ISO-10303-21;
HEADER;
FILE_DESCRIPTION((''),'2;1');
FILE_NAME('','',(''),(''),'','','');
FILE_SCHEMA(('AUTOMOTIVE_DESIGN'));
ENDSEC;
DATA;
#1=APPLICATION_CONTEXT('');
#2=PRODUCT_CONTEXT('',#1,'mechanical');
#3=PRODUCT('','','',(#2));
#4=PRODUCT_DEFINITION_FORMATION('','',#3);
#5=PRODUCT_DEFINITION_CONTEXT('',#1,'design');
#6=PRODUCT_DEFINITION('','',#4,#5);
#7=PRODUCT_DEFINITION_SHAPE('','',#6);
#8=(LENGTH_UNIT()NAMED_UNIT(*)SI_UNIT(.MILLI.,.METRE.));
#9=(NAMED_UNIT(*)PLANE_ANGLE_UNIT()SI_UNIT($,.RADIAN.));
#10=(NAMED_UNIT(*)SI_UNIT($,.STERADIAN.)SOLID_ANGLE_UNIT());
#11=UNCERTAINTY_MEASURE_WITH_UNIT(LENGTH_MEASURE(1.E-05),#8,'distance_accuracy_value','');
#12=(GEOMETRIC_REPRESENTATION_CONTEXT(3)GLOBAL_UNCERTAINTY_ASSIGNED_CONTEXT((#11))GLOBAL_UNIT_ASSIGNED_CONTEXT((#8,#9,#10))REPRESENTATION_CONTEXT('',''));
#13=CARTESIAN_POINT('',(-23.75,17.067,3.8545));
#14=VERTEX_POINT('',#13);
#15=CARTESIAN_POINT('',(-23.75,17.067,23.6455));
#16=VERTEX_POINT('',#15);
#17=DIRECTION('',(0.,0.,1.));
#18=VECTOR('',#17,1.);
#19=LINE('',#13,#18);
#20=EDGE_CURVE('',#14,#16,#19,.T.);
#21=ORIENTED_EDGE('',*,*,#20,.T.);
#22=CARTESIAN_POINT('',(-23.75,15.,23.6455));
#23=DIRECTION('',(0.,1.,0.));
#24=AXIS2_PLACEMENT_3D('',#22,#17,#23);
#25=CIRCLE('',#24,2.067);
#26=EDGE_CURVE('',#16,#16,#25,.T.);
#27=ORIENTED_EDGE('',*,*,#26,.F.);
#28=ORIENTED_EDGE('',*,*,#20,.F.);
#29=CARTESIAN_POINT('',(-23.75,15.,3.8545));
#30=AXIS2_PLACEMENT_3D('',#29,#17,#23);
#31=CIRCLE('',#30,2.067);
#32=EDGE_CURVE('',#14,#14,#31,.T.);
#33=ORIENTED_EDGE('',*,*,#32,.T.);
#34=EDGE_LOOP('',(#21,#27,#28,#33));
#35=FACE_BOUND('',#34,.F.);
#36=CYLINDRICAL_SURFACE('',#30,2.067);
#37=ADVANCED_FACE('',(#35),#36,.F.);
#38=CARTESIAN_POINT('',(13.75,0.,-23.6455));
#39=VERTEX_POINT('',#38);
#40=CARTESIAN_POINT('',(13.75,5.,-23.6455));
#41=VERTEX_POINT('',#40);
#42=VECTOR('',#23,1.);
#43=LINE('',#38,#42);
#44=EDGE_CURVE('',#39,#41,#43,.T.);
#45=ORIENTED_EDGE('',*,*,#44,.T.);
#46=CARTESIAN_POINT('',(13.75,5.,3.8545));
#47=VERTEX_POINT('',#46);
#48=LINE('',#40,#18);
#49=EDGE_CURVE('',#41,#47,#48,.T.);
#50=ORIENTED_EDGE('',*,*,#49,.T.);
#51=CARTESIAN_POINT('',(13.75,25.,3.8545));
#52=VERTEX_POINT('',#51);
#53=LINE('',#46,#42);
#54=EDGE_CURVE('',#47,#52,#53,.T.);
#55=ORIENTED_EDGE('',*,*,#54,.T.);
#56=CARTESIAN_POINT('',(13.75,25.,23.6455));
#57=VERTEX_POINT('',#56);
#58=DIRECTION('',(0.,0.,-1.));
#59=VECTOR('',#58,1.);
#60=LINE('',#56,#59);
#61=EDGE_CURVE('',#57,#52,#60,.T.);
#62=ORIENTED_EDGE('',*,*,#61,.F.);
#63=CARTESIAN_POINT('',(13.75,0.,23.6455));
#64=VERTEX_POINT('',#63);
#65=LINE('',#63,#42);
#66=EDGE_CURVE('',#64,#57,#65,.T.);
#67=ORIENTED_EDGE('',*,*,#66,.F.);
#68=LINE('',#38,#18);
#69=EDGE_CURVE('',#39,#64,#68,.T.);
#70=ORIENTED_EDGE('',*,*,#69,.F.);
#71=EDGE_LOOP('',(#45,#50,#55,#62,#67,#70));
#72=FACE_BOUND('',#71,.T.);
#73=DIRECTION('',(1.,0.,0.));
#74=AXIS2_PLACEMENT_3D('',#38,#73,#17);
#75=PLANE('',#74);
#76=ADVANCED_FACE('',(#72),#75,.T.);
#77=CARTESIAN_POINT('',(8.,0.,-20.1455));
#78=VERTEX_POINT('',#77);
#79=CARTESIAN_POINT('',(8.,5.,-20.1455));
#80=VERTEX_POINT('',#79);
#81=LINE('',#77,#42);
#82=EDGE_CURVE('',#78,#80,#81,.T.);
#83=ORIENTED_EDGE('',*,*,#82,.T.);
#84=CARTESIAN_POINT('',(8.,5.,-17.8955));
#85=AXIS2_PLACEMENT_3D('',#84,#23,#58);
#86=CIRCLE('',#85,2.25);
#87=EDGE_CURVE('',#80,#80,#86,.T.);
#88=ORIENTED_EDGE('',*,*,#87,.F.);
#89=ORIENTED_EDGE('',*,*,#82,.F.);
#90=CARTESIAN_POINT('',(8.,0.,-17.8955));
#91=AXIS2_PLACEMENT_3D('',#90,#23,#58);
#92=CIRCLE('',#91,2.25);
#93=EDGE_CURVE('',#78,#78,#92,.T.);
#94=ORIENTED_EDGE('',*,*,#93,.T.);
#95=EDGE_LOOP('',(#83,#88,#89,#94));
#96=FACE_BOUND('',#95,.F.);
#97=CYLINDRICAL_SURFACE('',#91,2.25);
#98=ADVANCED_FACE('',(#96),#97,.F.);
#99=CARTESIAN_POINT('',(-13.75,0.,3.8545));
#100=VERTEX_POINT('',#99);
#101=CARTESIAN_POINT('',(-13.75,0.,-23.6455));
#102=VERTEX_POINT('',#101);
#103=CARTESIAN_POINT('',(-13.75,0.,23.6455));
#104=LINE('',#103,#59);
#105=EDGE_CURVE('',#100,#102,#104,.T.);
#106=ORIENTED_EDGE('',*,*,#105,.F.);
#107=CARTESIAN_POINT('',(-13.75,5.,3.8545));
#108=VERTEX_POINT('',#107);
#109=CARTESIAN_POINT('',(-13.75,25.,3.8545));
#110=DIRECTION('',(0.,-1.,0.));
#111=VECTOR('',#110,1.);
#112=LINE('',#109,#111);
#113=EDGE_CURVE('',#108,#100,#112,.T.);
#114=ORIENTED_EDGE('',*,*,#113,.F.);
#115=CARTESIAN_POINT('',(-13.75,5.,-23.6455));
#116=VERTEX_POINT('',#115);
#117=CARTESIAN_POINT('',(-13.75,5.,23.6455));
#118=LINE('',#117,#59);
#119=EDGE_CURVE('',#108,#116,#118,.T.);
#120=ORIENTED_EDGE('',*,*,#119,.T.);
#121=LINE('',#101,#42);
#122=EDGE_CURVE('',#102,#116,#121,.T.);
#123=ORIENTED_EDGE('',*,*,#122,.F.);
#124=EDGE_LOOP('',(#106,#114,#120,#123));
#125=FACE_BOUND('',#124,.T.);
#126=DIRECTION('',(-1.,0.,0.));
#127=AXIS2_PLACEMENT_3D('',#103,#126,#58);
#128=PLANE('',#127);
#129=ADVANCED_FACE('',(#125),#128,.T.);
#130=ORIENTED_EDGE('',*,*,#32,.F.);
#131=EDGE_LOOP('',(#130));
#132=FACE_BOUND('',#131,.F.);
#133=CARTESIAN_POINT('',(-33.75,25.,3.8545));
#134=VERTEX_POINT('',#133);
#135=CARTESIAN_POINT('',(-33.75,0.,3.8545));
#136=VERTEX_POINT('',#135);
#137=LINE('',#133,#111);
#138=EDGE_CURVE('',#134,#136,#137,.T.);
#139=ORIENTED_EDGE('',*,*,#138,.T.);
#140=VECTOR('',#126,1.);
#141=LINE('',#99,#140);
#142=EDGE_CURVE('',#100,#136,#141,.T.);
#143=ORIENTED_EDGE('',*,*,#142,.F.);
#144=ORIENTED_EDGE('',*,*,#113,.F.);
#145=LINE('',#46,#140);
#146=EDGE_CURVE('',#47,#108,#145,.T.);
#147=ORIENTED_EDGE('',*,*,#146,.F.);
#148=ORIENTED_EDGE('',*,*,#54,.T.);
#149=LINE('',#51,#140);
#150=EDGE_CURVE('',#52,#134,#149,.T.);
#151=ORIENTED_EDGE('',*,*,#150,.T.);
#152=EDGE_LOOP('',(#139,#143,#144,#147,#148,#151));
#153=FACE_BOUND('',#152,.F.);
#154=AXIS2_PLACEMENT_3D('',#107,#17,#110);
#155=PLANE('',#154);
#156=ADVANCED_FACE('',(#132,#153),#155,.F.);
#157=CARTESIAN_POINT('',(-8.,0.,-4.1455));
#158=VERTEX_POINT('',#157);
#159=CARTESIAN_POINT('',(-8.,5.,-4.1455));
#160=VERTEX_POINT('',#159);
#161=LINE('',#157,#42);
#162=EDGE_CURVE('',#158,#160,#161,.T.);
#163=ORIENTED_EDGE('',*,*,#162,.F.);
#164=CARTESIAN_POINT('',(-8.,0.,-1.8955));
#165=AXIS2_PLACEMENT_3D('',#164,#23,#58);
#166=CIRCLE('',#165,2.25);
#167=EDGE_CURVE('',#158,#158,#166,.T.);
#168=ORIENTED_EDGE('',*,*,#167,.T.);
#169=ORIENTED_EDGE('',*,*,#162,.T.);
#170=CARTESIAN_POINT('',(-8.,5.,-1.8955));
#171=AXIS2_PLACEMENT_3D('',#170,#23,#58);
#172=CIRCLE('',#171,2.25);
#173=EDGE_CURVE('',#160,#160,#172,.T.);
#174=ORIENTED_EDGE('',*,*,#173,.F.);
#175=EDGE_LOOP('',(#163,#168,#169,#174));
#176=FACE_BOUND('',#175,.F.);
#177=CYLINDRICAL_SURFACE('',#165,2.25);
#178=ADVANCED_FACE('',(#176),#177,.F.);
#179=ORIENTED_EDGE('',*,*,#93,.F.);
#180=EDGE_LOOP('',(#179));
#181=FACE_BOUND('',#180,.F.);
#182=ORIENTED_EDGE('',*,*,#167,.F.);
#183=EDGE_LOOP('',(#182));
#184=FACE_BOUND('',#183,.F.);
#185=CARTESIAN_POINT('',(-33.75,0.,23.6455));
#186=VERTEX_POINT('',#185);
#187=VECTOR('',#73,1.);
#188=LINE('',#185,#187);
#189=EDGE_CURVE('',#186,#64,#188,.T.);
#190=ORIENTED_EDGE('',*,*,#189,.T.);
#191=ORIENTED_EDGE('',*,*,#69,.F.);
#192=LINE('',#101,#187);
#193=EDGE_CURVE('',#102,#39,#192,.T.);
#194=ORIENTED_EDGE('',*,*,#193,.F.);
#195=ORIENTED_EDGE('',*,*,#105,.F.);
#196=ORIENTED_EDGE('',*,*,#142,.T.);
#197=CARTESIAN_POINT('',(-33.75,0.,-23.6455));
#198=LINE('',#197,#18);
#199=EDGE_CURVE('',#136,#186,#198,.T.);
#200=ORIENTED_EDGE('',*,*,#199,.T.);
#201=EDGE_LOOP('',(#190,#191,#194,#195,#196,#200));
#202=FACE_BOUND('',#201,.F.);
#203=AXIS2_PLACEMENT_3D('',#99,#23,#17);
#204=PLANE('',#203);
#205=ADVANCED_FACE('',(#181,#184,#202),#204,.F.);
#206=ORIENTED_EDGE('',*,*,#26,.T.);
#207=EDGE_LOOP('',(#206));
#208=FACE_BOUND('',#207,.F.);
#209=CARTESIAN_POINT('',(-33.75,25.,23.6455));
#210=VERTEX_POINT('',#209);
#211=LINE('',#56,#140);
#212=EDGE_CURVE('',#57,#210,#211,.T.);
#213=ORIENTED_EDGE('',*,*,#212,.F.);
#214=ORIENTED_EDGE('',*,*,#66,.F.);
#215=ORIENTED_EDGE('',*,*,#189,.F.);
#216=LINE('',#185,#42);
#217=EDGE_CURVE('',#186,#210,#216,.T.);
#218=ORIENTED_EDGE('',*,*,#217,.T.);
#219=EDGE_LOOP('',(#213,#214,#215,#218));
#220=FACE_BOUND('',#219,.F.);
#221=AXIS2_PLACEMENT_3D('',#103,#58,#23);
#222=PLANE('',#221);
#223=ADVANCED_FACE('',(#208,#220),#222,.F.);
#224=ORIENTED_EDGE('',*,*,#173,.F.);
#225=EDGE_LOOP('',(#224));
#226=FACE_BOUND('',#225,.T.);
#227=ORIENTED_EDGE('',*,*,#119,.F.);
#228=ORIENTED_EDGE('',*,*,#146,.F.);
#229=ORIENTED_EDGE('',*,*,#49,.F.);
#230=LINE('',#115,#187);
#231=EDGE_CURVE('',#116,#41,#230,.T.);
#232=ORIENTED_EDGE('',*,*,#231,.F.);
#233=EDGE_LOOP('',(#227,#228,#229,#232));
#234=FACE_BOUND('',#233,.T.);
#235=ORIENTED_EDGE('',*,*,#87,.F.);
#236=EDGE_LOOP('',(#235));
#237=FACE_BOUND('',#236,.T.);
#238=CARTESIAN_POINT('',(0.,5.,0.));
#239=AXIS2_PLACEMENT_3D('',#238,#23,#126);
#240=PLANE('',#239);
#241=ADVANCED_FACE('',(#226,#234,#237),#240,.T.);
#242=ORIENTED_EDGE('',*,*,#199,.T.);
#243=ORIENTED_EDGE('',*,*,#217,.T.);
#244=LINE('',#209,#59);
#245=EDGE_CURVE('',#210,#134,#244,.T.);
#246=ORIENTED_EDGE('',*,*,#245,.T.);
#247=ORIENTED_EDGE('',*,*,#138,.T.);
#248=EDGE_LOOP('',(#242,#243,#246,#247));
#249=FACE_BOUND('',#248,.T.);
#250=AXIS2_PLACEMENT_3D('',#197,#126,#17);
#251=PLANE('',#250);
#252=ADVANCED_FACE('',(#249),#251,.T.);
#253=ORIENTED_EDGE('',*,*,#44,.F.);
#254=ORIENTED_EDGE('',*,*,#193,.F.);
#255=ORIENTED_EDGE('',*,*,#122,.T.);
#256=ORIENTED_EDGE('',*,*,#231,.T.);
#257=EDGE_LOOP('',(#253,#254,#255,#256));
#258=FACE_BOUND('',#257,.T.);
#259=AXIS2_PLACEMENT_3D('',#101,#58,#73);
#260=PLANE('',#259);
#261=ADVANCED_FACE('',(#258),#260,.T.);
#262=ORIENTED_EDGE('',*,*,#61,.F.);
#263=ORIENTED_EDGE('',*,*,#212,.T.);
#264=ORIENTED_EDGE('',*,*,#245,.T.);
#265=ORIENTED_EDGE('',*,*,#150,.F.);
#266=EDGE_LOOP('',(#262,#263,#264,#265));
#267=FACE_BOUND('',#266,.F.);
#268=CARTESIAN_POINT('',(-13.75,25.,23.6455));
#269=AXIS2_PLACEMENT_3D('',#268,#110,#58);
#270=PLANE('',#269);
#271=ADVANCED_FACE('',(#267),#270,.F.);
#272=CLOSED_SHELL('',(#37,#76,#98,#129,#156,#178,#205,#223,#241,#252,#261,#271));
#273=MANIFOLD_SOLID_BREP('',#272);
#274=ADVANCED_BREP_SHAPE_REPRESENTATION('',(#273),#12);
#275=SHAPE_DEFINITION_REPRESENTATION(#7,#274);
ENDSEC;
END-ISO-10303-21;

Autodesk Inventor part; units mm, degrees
ref_plane "YZ Plane" through (0, 0, 0) normal (1, 0, 0) x (0, 1, 0)
ref_plane "XZ Plane" through (0, 0, 0) normal (0, 1, 0) x (-1, 0, 0)
ref_plane "XY Plane" through (0, 0, 0) normal (0, 0, 1) x (1, 0, 0)
sketch "Sketch1" plane through (0, 0, 0) normal (0, 1, 0) x (-1, 0, 0)
  line L0 (-13.75, 23.6455) -> (13.75, 23.6455)
  line L1 (13.75, 23.6455) -> (13.75, -23.6455)
  line L2 (13.75, -23.6455) -> (-13.75, -23.6455)
  line L3 (-13.75, -23.6455) -> (-13.75, 23.6455)
  line L4 (-13.75, 23.6455) -> (13.75, -23.6455) construction
  line L5 (13.75, 23.6455) -> (-13.75, -23.6455) construction
  point P0 (0, 0)
  dimension "d0" = 47.291
  dimension "d1" = 27.5
extrude "Extrusion1" add sketch "Sketch1" along normal blind 5
sketch "Sketch2" plane through (0, 5, 0) normal (0, 1, 0) x (1, 0, 0)
  line L0 (-13.75, 23.6455) -> (-13.75, -23.6455) projected
  line L1 (13.75, -23.6455) -> (13.75, 23.6455) projected
  line L2 (-13.75, -23.6455) -> (13.75, -23.6455)
  line L3 (13.75, -23.6455) -> (13.75, -3.8545)
  line L4 (13.75, -3.8545) -> (-13.75, -3.8545)
  line L5 (-13.75, -3.8545) -> (-13.75, -23.6455)
  point P0 (0, 0)
  dimension "d4" = 19.791
extrude "Extrusion2" add sketch "Sketch2" along normal blind 20
sketch "Sketch5" plane through (-13.75, 0, -23.6455) normal (-1, 0, 0) x (0, 0, 1)
  line L0 (47.291, 25) -> (27.5, 25) projected
  line L1 (0, 0) -> (47.291, 0) projected
  line L2 (47.291, 25) -> (27.5, 25)
  line L3 (27.5, 25) -> (27.5, 0)
  line L4 (27.5, 0) -> (47.291, 0)
  line L5 (47.291, 0) -> (47.291, 25)
  line L6 (27.5, 5) -> (27.5, 25) projected
  point P0 (23.6455, 0)
  dimension "d27" = 0
extrude "Extrusion3" add sketch "Sketch5" along normal blind 20
sketch "Sketch3" plane through (0, 0, 0) normal (0, -1, 0) x (1, 0, 0)
  line L0 (13.75, -23.6455) -> (-13.75, -23.6455) projected
  line L1 (13.75, 23.6455) -> (13.75, -23.6455) projected
  point P0 (0, 0)
  point P1 (8, -17.8955)
  point P2 (-8, -1.8955)
  dimension "d7" = 5.75
  dimension "d8" = 5.75
  dimension "d9" = 16
  dimension "d10" = 16
hole "Hole1" at (8, 0, -17.8955) at (-8, 0, -1.8955) direction (0, 1, 0) diameter 4.5 end through all
sketch "Sketch4" plane through (13.75, 5, 3.8545) normal (0, 0, -1) x (-1, 0, 0)
  line L0 (27.5, 0) -> (27.5, 20) projected
  line L1 (27.5, 0) -> (0, 0) projected
  line L2 (47.5, 20) -> (47.5, -5) projected
  point P0 (13.75, -5)
  point P1 (37.5, 10)
  dimension "d19" = 10
  dimension "d30" = 10
hole "Hole2" at (-23.75, 15, 3.8545) direction (0, 0, 1) diameter 4.134 end through all thread size "M5x0.8" class "6H" standard "ISO Metric profile"
equation "\"d8\" = d7"
properties part number "ER_Positionierungseinheit_Greifer"
